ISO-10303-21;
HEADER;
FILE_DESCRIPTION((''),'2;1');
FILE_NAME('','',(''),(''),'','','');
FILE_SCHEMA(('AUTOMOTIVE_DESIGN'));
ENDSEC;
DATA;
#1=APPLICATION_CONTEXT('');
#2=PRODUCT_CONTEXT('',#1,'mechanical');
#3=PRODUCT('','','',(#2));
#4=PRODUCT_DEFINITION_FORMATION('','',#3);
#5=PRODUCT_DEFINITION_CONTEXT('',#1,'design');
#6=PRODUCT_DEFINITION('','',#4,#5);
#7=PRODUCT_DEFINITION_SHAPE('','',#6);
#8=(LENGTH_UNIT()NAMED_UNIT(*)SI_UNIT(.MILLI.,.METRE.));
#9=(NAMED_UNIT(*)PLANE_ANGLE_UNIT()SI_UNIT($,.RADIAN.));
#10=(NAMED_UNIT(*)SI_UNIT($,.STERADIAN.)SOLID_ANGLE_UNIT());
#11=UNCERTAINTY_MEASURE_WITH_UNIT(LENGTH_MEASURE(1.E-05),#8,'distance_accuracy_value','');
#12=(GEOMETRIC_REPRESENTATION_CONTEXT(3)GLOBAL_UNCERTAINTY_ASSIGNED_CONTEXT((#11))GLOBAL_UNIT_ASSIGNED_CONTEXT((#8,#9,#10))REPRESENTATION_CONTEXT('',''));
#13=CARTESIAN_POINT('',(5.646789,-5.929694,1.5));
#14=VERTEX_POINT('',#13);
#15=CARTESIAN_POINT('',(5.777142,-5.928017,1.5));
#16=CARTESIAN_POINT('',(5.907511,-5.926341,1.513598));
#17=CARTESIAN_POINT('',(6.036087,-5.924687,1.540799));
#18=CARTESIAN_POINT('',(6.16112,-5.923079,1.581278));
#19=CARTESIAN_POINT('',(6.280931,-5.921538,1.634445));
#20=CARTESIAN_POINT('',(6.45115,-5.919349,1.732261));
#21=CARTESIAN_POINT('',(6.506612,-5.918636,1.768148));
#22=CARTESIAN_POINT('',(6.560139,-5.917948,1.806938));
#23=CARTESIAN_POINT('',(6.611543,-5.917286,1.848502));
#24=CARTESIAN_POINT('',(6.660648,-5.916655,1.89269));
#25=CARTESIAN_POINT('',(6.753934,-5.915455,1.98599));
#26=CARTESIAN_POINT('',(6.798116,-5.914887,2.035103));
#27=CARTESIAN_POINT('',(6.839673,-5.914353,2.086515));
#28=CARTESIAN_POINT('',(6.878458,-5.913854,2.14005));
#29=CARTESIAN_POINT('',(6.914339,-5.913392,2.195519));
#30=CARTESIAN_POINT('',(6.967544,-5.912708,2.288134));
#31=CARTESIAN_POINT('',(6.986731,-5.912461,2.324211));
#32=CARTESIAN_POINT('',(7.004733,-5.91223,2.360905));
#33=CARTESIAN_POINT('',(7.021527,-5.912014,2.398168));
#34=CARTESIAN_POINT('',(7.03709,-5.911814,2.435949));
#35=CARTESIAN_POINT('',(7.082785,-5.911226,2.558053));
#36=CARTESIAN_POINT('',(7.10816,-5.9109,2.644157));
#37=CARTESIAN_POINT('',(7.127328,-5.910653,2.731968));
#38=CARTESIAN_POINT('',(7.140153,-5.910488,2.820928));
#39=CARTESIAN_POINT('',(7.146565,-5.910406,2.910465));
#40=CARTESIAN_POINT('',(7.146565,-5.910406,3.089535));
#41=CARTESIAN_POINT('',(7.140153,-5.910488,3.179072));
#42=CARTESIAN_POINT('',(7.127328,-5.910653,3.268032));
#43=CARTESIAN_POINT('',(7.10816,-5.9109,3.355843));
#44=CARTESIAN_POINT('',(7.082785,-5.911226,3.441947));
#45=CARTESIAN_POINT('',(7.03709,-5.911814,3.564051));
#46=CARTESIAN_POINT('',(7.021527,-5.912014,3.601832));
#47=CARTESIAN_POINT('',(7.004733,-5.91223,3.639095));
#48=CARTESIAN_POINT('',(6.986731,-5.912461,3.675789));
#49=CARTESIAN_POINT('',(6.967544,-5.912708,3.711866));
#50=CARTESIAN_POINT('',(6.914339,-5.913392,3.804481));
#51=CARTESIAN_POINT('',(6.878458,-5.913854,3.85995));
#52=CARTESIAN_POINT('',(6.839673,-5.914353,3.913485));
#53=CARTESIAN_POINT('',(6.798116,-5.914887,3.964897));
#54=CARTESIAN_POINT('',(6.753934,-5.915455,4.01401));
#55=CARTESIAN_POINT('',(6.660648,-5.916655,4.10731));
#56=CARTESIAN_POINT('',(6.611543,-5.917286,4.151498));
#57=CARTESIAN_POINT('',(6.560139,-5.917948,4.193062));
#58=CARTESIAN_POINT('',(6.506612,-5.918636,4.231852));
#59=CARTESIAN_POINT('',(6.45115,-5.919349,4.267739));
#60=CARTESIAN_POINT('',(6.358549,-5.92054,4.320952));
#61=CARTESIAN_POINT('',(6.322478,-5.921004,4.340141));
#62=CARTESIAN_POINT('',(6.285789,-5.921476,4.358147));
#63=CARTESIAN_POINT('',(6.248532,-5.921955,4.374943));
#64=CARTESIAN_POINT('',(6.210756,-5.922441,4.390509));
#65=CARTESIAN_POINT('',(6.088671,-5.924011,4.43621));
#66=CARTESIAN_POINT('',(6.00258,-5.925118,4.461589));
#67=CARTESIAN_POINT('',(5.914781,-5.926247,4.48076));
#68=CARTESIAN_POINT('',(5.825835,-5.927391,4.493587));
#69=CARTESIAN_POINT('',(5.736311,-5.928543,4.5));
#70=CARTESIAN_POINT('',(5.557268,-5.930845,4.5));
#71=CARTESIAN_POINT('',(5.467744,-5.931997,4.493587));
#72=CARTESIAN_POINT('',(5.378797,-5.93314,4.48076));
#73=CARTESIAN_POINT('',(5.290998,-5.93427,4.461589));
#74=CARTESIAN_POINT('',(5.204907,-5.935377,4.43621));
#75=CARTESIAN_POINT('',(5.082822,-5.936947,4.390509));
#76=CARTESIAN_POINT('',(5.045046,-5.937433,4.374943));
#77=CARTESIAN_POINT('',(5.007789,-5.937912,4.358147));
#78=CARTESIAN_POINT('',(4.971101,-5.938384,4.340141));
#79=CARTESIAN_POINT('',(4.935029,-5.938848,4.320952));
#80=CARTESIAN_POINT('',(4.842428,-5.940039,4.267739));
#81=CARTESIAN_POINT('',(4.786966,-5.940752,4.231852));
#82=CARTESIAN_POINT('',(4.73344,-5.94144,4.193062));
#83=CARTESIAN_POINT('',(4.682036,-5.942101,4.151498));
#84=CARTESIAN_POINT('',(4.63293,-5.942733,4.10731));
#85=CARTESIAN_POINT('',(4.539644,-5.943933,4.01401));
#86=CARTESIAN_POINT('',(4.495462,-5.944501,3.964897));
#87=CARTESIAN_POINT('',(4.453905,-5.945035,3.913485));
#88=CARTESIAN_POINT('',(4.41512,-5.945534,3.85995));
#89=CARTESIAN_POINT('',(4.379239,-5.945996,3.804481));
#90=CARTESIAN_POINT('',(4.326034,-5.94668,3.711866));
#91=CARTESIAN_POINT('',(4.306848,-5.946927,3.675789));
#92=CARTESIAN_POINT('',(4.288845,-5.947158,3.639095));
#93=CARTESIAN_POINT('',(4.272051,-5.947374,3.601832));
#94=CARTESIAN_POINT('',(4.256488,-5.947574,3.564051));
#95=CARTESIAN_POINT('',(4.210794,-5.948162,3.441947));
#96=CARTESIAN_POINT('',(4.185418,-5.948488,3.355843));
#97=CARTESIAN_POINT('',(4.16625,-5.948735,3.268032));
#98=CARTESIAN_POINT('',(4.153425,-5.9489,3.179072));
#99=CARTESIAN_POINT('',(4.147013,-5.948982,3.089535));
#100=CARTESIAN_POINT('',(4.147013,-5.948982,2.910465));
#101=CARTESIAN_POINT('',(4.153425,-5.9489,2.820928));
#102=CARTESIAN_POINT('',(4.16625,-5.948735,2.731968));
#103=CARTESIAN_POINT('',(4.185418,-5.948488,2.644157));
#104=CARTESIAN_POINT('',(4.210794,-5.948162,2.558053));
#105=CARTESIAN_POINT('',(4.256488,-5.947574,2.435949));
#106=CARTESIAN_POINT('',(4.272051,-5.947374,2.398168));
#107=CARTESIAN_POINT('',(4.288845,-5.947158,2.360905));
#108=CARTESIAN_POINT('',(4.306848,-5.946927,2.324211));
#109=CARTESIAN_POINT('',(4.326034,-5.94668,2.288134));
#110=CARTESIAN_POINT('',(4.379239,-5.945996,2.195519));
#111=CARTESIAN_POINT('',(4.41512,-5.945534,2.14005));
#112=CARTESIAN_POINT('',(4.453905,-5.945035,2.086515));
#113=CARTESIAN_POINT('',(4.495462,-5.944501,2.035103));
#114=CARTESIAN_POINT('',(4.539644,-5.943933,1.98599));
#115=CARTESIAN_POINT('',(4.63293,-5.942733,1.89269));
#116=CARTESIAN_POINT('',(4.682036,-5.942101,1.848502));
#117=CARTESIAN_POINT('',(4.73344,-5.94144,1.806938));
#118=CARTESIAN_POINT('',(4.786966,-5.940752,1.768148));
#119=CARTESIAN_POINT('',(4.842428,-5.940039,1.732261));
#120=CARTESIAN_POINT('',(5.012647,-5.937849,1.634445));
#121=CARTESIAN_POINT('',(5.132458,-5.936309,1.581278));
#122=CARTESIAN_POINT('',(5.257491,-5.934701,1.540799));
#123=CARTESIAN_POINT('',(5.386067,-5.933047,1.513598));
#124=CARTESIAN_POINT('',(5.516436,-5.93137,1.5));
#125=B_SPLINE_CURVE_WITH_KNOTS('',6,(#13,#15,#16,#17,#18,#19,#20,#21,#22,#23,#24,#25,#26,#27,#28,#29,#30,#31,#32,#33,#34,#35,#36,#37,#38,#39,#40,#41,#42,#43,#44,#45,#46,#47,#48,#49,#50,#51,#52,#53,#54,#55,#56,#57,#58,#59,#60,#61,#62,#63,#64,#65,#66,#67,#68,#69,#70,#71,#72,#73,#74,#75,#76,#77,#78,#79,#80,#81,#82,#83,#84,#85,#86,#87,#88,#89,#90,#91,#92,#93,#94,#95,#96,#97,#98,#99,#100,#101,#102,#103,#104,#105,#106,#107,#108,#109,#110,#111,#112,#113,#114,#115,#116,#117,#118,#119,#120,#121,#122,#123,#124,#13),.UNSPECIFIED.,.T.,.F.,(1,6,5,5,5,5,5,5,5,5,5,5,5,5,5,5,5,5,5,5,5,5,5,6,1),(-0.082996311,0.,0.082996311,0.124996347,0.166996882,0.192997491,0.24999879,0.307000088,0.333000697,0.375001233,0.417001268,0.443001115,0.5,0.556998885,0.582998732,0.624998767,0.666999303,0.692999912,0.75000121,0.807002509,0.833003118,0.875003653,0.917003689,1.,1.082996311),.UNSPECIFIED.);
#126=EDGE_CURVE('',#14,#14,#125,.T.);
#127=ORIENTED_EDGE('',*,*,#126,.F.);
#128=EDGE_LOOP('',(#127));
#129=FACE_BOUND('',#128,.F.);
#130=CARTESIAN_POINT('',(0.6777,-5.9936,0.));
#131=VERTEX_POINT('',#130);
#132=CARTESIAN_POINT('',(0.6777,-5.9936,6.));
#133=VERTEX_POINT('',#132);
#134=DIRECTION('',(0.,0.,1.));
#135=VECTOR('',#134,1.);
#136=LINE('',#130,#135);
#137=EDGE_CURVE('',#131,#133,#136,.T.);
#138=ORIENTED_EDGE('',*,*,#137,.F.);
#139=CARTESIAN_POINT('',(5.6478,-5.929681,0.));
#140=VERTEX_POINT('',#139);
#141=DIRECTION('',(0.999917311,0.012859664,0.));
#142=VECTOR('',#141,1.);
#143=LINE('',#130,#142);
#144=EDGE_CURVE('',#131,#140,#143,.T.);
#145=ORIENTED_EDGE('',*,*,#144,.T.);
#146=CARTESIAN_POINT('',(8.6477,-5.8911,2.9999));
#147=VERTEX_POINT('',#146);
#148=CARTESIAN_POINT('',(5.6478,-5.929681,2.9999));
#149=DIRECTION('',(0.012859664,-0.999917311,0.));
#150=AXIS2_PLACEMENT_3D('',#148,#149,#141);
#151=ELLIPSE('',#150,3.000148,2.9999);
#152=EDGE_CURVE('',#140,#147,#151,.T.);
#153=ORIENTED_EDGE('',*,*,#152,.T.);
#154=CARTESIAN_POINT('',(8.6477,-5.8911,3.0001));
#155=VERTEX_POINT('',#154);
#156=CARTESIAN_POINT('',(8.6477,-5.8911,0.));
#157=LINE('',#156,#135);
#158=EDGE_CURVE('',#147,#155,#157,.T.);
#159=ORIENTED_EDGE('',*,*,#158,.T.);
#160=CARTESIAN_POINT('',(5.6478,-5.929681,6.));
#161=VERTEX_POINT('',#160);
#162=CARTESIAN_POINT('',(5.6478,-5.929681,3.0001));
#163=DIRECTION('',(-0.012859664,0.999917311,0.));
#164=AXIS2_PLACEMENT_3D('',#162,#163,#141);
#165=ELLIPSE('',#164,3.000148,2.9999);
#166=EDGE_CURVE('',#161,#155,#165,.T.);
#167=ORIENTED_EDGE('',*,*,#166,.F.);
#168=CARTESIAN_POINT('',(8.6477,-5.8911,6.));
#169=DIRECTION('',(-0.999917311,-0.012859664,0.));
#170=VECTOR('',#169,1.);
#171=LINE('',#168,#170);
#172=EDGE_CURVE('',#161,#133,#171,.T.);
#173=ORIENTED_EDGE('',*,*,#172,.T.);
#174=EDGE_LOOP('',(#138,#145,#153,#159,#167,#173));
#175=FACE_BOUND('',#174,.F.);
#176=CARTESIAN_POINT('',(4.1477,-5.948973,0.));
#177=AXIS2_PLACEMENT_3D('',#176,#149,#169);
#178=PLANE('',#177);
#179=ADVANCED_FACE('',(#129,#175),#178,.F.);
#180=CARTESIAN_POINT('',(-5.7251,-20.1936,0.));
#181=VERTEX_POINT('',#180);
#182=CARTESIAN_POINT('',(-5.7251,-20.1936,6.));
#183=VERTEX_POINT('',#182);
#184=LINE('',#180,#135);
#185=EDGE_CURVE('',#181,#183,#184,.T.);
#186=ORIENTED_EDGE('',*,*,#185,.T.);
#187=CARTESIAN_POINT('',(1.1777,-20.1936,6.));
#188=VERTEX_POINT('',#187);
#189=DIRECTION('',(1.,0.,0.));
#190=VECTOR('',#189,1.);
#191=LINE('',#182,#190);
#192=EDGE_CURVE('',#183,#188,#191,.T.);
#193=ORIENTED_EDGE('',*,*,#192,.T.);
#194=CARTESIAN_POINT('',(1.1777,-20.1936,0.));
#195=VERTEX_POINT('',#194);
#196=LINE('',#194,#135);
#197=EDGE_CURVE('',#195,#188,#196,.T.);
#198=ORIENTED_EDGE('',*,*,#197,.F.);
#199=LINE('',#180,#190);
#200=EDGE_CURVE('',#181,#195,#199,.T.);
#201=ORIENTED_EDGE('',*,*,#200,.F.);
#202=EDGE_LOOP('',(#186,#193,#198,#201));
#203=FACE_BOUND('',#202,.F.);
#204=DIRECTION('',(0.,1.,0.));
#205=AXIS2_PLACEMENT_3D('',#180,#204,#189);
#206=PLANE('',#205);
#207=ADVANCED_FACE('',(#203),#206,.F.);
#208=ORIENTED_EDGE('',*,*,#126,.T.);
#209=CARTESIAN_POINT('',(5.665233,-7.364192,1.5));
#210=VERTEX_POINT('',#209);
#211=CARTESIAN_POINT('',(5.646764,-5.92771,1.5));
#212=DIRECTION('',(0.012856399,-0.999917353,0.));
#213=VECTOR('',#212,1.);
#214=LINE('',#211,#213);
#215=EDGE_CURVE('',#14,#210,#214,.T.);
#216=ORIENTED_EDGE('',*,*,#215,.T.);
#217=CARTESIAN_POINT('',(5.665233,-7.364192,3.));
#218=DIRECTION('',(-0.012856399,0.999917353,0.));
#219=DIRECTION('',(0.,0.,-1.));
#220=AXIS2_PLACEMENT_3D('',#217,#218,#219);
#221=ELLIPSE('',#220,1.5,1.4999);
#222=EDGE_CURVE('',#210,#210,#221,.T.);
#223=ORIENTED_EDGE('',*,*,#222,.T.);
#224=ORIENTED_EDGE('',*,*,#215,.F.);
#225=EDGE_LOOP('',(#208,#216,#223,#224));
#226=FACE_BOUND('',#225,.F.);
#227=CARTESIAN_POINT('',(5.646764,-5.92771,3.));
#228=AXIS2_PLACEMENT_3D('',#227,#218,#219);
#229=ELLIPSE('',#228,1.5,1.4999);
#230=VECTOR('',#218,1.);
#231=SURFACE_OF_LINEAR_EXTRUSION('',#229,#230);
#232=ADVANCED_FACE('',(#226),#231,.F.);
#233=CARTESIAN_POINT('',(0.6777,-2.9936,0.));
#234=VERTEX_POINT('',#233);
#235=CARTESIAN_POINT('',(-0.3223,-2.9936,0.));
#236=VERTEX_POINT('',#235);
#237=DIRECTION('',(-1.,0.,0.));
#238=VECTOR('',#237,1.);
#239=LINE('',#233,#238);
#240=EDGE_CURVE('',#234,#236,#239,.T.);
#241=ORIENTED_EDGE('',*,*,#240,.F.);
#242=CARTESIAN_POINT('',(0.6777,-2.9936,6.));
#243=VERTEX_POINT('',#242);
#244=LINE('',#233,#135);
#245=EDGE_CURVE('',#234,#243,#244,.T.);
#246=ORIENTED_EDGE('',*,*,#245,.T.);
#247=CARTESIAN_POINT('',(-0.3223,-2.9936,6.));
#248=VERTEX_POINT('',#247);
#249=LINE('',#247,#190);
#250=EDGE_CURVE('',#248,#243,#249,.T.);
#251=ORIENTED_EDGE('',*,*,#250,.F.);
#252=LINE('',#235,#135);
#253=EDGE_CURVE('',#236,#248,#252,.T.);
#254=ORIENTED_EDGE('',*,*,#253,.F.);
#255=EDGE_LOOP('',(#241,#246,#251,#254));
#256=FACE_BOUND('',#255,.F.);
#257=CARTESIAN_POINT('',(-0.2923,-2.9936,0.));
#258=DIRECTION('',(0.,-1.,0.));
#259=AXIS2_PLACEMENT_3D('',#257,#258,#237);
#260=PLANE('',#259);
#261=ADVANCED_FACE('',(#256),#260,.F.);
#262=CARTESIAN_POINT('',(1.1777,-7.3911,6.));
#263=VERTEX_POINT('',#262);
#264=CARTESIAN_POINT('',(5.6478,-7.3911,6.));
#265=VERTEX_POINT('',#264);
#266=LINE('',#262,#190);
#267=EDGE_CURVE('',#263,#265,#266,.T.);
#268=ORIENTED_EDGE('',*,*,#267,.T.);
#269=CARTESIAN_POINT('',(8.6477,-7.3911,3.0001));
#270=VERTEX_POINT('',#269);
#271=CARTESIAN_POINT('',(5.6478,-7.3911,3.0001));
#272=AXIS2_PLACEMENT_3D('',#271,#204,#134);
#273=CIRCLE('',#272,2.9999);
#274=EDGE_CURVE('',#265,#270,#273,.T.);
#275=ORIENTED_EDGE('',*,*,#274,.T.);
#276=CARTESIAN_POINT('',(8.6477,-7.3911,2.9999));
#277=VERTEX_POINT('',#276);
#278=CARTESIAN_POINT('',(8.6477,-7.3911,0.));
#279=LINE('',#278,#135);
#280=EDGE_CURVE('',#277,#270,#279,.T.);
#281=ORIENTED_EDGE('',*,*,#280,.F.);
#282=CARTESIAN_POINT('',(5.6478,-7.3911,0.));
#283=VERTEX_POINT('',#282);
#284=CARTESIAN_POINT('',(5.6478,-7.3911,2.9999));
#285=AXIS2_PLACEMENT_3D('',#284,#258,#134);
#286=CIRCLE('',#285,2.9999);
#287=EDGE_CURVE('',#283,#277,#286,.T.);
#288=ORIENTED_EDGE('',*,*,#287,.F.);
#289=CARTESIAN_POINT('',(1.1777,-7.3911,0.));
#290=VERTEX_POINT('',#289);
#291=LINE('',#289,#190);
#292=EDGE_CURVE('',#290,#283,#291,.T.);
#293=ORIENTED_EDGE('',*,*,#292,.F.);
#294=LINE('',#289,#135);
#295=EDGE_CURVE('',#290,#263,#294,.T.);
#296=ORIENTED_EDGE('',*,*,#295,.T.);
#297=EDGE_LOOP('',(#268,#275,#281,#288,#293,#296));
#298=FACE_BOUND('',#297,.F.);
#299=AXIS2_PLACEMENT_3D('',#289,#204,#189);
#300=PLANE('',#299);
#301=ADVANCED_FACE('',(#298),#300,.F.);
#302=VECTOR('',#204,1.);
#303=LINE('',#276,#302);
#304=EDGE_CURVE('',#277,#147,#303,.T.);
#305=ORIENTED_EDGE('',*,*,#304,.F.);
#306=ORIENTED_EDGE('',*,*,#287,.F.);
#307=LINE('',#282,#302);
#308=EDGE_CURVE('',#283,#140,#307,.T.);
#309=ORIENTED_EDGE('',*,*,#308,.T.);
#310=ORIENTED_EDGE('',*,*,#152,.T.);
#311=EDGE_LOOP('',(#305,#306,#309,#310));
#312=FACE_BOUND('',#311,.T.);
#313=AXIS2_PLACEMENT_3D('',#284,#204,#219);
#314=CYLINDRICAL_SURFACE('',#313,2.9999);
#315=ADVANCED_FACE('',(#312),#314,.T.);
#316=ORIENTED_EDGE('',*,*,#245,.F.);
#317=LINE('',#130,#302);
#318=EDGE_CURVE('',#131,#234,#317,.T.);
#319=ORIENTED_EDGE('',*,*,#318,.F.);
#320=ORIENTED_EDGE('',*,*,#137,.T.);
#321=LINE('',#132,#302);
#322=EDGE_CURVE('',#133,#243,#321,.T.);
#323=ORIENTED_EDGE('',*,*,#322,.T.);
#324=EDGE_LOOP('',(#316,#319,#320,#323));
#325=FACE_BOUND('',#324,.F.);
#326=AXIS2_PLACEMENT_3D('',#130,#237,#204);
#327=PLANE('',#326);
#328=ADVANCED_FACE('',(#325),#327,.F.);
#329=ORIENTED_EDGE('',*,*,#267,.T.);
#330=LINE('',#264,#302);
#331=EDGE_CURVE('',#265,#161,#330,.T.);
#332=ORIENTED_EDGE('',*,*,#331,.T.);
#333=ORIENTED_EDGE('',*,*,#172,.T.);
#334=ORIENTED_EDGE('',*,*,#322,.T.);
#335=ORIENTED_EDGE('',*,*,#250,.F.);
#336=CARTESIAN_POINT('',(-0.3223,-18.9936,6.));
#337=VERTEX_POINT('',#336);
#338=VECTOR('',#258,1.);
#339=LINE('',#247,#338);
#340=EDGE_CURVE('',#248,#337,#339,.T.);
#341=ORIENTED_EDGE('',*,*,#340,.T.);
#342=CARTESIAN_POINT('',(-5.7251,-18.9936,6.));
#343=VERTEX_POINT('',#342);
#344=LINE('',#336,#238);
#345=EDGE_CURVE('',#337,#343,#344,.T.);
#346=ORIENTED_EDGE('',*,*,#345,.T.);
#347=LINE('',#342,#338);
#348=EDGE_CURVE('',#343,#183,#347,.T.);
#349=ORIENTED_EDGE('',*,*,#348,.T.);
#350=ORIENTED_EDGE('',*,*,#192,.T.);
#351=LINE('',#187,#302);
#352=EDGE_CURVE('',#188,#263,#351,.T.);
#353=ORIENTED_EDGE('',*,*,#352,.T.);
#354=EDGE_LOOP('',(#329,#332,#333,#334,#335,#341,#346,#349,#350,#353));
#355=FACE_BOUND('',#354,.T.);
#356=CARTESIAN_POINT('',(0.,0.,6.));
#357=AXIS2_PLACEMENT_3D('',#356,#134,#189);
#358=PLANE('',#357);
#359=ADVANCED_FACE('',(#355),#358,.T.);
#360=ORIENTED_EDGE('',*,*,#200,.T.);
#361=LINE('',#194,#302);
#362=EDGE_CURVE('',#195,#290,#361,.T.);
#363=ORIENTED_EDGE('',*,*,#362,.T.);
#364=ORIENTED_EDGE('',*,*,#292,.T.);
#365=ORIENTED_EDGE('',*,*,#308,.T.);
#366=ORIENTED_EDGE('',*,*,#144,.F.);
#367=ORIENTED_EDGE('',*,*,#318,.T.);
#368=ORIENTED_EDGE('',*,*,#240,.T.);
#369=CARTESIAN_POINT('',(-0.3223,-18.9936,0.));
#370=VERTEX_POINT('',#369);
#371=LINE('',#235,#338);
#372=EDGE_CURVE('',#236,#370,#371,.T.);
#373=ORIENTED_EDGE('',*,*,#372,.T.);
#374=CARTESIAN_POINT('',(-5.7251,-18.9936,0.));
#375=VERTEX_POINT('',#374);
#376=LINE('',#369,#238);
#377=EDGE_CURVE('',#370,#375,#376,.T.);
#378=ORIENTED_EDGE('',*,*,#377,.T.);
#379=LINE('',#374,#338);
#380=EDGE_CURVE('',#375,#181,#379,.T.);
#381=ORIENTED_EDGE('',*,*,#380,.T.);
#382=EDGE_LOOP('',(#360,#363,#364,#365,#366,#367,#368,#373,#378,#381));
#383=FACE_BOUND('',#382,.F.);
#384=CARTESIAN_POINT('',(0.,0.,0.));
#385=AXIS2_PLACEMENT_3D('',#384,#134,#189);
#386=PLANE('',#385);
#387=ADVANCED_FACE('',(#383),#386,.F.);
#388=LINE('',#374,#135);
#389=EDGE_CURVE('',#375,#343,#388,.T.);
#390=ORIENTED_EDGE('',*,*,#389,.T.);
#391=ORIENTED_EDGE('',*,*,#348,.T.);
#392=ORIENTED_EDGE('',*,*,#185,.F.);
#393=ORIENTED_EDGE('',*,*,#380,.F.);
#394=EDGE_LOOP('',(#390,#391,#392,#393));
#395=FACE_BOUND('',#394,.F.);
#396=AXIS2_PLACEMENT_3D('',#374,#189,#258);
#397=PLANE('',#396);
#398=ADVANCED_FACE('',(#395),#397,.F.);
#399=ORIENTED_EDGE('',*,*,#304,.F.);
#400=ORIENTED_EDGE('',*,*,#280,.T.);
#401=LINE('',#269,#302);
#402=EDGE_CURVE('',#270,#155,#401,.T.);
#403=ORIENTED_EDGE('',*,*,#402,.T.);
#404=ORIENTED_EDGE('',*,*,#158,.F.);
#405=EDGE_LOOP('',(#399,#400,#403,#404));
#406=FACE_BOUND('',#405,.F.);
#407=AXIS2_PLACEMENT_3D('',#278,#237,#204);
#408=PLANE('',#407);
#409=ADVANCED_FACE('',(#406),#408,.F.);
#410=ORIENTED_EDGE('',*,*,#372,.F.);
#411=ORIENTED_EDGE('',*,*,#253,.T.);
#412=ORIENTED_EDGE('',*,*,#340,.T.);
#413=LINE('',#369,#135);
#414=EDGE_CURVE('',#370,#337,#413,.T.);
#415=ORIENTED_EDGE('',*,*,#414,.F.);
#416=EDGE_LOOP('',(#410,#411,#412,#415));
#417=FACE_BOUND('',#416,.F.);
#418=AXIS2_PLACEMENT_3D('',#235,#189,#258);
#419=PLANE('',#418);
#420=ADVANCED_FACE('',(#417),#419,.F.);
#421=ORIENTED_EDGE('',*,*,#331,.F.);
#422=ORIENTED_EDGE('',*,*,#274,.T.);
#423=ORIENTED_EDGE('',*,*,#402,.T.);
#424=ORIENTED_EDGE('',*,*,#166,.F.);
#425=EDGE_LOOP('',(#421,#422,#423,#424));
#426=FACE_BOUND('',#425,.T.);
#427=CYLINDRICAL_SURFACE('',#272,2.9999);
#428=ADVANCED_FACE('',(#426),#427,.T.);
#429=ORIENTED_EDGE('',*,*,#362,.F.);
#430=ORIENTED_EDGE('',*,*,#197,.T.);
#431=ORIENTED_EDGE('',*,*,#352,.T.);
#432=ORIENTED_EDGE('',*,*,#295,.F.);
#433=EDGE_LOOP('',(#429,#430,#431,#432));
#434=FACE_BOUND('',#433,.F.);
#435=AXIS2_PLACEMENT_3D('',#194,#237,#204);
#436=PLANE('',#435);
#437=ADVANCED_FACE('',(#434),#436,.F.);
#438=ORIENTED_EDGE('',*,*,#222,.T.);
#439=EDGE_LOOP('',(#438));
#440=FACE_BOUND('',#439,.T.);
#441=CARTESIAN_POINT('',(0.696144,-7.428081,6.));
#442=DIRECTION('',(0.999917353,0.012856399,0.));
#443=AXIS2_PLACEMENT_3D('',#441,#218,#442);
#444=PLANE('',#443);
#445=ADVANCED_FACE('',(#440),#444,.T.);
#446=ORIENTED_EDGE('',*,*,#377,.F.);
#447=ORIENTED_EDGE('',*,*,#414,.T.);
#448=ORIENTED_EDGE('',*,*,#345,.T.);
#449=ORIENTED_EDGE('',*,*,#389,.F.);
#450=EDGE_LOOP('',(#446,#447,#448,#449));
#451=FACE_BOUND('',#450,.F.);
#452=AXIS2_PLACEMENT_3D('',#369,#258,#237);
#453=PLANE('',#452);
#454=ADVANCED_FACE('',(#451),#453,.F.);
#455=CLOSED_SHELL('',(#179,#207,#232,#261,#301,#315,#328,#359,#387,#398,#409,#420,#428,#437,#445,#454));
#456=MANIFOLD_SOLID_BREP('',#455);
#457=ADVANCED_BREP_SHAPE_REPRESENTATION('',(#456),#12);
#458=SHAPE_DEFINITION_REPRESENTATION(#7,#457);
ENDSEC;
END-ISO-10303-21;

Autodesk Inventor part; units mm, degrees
ref_plane "YZ Plane" through (0, 0, 0) normal (1, 0, 0) x (0, 1, 0)
ref_plane "XZ Plane" through (0, 0, 0) normal (0, 1, 0) x (-1, 0, 0)
ref_plane "XY Plane" through (0, 0, 0) normal (0, 0, 1) x (1, 0, 0)
sketch "草圖1" plane through (0, 0, 0) normal (0, 0, 1) x (1, 0, 0)
  line L0 (-0.3223, -18.9936) -> (-5.7251, -18.9936)
  line L1 (-5.7251, -18.9936) -> (-5.7251, -20.1936)
  line L2 (-5.7251, -20.1936) -> (1.1777, -20.1936)
  line L3 (1.1777, -20.1936) -> (1.1777, -7.3911)
  line L4 (1.1777, -7.3911) -> (8.6477, -7.3911)
  line L5 (8.6477, -7.3911) -> (8.6477, -5.8911)
  line L6 (8.6477, -5.8911) -> (0.6777, -5.9936)
  line L7 (0.6777, -5.9936) -> (0.6777, -2.9936)
  line L8 (0.6777, -2.9936) -> (-0.3223, -2.9936)
  line L9 (-0.3223, -2.9936) -> (-0.3223, -18.9936)
  line L10 (0.6477, -6) -> (-0.2923, -6) projected
  line L11 (0.6477, 0) -> (0.6477, -6) projected
  line L12 (-0.2923, 0) -> (0.6477, 0) projected
  line L13 (-0.2923, 0) -> (-0.2923, -6) projected
  line L14 (4.1477, 0) -> (7.1477, 0) projected
  line L15 (4.1477, 0) -> (4.1477, -6)
  line L16 (7.1477, 0) -> (7.1477, -6)
  line L17 (7.1477, -6) -> (4.1477, -6) projected
  point P0 (0.1784, -6)
  point P1 (0.1777, -6)
  point P2 (8.6477, -6.6411)
  dimension "d0" = 1
  dimension "d3" = 0.94
  dimension "d4" = 0.03
  dimension "d5" = 3
  dimension "d6" = 1.5
  dimension "d7" = 1.2
  dimension "d8" = 16
  dimension "d9" = 1.5
  dimension "d10" = 1.5
extrude "擠出1" add sketch "草圖1" along normal blind 6 contours L9 L8 L13 L10 L11 L7 L6 L15 L17 L16 L5 L4 L3 L2 L1 L0 | L8 L11 L10 L13 | L6 L16 L17 L15
fillet "圓角1" radius 3 2 edges at (8.6477, -6.6411, 6) (8.6477, -6.6411, 0)
sketch "草圖3" plane through (0.6777, -5.9936, 6) normal (-0.0128564, 0.9999174, 0) x (0.9999174, 0.0128564, 0)
  ellipse E0 centre (5.0466, 3) end of major axis (5.0466, 1.5) minor radius 1.4999 construction
  ellipse E1 centre (4.9695, 3) end of major axis (4.9695, 4.5) minor radius 1.4999 projected
  point P0 (-0.6006, 6)
extrude "擠出2" cut sketch "草圖3" against normal up to surface (1.4326 mm away)
equation "\"d4\" = -0.5 * d3 + 0.5 * d0"
properties part number "j1 enndstop blocker"
